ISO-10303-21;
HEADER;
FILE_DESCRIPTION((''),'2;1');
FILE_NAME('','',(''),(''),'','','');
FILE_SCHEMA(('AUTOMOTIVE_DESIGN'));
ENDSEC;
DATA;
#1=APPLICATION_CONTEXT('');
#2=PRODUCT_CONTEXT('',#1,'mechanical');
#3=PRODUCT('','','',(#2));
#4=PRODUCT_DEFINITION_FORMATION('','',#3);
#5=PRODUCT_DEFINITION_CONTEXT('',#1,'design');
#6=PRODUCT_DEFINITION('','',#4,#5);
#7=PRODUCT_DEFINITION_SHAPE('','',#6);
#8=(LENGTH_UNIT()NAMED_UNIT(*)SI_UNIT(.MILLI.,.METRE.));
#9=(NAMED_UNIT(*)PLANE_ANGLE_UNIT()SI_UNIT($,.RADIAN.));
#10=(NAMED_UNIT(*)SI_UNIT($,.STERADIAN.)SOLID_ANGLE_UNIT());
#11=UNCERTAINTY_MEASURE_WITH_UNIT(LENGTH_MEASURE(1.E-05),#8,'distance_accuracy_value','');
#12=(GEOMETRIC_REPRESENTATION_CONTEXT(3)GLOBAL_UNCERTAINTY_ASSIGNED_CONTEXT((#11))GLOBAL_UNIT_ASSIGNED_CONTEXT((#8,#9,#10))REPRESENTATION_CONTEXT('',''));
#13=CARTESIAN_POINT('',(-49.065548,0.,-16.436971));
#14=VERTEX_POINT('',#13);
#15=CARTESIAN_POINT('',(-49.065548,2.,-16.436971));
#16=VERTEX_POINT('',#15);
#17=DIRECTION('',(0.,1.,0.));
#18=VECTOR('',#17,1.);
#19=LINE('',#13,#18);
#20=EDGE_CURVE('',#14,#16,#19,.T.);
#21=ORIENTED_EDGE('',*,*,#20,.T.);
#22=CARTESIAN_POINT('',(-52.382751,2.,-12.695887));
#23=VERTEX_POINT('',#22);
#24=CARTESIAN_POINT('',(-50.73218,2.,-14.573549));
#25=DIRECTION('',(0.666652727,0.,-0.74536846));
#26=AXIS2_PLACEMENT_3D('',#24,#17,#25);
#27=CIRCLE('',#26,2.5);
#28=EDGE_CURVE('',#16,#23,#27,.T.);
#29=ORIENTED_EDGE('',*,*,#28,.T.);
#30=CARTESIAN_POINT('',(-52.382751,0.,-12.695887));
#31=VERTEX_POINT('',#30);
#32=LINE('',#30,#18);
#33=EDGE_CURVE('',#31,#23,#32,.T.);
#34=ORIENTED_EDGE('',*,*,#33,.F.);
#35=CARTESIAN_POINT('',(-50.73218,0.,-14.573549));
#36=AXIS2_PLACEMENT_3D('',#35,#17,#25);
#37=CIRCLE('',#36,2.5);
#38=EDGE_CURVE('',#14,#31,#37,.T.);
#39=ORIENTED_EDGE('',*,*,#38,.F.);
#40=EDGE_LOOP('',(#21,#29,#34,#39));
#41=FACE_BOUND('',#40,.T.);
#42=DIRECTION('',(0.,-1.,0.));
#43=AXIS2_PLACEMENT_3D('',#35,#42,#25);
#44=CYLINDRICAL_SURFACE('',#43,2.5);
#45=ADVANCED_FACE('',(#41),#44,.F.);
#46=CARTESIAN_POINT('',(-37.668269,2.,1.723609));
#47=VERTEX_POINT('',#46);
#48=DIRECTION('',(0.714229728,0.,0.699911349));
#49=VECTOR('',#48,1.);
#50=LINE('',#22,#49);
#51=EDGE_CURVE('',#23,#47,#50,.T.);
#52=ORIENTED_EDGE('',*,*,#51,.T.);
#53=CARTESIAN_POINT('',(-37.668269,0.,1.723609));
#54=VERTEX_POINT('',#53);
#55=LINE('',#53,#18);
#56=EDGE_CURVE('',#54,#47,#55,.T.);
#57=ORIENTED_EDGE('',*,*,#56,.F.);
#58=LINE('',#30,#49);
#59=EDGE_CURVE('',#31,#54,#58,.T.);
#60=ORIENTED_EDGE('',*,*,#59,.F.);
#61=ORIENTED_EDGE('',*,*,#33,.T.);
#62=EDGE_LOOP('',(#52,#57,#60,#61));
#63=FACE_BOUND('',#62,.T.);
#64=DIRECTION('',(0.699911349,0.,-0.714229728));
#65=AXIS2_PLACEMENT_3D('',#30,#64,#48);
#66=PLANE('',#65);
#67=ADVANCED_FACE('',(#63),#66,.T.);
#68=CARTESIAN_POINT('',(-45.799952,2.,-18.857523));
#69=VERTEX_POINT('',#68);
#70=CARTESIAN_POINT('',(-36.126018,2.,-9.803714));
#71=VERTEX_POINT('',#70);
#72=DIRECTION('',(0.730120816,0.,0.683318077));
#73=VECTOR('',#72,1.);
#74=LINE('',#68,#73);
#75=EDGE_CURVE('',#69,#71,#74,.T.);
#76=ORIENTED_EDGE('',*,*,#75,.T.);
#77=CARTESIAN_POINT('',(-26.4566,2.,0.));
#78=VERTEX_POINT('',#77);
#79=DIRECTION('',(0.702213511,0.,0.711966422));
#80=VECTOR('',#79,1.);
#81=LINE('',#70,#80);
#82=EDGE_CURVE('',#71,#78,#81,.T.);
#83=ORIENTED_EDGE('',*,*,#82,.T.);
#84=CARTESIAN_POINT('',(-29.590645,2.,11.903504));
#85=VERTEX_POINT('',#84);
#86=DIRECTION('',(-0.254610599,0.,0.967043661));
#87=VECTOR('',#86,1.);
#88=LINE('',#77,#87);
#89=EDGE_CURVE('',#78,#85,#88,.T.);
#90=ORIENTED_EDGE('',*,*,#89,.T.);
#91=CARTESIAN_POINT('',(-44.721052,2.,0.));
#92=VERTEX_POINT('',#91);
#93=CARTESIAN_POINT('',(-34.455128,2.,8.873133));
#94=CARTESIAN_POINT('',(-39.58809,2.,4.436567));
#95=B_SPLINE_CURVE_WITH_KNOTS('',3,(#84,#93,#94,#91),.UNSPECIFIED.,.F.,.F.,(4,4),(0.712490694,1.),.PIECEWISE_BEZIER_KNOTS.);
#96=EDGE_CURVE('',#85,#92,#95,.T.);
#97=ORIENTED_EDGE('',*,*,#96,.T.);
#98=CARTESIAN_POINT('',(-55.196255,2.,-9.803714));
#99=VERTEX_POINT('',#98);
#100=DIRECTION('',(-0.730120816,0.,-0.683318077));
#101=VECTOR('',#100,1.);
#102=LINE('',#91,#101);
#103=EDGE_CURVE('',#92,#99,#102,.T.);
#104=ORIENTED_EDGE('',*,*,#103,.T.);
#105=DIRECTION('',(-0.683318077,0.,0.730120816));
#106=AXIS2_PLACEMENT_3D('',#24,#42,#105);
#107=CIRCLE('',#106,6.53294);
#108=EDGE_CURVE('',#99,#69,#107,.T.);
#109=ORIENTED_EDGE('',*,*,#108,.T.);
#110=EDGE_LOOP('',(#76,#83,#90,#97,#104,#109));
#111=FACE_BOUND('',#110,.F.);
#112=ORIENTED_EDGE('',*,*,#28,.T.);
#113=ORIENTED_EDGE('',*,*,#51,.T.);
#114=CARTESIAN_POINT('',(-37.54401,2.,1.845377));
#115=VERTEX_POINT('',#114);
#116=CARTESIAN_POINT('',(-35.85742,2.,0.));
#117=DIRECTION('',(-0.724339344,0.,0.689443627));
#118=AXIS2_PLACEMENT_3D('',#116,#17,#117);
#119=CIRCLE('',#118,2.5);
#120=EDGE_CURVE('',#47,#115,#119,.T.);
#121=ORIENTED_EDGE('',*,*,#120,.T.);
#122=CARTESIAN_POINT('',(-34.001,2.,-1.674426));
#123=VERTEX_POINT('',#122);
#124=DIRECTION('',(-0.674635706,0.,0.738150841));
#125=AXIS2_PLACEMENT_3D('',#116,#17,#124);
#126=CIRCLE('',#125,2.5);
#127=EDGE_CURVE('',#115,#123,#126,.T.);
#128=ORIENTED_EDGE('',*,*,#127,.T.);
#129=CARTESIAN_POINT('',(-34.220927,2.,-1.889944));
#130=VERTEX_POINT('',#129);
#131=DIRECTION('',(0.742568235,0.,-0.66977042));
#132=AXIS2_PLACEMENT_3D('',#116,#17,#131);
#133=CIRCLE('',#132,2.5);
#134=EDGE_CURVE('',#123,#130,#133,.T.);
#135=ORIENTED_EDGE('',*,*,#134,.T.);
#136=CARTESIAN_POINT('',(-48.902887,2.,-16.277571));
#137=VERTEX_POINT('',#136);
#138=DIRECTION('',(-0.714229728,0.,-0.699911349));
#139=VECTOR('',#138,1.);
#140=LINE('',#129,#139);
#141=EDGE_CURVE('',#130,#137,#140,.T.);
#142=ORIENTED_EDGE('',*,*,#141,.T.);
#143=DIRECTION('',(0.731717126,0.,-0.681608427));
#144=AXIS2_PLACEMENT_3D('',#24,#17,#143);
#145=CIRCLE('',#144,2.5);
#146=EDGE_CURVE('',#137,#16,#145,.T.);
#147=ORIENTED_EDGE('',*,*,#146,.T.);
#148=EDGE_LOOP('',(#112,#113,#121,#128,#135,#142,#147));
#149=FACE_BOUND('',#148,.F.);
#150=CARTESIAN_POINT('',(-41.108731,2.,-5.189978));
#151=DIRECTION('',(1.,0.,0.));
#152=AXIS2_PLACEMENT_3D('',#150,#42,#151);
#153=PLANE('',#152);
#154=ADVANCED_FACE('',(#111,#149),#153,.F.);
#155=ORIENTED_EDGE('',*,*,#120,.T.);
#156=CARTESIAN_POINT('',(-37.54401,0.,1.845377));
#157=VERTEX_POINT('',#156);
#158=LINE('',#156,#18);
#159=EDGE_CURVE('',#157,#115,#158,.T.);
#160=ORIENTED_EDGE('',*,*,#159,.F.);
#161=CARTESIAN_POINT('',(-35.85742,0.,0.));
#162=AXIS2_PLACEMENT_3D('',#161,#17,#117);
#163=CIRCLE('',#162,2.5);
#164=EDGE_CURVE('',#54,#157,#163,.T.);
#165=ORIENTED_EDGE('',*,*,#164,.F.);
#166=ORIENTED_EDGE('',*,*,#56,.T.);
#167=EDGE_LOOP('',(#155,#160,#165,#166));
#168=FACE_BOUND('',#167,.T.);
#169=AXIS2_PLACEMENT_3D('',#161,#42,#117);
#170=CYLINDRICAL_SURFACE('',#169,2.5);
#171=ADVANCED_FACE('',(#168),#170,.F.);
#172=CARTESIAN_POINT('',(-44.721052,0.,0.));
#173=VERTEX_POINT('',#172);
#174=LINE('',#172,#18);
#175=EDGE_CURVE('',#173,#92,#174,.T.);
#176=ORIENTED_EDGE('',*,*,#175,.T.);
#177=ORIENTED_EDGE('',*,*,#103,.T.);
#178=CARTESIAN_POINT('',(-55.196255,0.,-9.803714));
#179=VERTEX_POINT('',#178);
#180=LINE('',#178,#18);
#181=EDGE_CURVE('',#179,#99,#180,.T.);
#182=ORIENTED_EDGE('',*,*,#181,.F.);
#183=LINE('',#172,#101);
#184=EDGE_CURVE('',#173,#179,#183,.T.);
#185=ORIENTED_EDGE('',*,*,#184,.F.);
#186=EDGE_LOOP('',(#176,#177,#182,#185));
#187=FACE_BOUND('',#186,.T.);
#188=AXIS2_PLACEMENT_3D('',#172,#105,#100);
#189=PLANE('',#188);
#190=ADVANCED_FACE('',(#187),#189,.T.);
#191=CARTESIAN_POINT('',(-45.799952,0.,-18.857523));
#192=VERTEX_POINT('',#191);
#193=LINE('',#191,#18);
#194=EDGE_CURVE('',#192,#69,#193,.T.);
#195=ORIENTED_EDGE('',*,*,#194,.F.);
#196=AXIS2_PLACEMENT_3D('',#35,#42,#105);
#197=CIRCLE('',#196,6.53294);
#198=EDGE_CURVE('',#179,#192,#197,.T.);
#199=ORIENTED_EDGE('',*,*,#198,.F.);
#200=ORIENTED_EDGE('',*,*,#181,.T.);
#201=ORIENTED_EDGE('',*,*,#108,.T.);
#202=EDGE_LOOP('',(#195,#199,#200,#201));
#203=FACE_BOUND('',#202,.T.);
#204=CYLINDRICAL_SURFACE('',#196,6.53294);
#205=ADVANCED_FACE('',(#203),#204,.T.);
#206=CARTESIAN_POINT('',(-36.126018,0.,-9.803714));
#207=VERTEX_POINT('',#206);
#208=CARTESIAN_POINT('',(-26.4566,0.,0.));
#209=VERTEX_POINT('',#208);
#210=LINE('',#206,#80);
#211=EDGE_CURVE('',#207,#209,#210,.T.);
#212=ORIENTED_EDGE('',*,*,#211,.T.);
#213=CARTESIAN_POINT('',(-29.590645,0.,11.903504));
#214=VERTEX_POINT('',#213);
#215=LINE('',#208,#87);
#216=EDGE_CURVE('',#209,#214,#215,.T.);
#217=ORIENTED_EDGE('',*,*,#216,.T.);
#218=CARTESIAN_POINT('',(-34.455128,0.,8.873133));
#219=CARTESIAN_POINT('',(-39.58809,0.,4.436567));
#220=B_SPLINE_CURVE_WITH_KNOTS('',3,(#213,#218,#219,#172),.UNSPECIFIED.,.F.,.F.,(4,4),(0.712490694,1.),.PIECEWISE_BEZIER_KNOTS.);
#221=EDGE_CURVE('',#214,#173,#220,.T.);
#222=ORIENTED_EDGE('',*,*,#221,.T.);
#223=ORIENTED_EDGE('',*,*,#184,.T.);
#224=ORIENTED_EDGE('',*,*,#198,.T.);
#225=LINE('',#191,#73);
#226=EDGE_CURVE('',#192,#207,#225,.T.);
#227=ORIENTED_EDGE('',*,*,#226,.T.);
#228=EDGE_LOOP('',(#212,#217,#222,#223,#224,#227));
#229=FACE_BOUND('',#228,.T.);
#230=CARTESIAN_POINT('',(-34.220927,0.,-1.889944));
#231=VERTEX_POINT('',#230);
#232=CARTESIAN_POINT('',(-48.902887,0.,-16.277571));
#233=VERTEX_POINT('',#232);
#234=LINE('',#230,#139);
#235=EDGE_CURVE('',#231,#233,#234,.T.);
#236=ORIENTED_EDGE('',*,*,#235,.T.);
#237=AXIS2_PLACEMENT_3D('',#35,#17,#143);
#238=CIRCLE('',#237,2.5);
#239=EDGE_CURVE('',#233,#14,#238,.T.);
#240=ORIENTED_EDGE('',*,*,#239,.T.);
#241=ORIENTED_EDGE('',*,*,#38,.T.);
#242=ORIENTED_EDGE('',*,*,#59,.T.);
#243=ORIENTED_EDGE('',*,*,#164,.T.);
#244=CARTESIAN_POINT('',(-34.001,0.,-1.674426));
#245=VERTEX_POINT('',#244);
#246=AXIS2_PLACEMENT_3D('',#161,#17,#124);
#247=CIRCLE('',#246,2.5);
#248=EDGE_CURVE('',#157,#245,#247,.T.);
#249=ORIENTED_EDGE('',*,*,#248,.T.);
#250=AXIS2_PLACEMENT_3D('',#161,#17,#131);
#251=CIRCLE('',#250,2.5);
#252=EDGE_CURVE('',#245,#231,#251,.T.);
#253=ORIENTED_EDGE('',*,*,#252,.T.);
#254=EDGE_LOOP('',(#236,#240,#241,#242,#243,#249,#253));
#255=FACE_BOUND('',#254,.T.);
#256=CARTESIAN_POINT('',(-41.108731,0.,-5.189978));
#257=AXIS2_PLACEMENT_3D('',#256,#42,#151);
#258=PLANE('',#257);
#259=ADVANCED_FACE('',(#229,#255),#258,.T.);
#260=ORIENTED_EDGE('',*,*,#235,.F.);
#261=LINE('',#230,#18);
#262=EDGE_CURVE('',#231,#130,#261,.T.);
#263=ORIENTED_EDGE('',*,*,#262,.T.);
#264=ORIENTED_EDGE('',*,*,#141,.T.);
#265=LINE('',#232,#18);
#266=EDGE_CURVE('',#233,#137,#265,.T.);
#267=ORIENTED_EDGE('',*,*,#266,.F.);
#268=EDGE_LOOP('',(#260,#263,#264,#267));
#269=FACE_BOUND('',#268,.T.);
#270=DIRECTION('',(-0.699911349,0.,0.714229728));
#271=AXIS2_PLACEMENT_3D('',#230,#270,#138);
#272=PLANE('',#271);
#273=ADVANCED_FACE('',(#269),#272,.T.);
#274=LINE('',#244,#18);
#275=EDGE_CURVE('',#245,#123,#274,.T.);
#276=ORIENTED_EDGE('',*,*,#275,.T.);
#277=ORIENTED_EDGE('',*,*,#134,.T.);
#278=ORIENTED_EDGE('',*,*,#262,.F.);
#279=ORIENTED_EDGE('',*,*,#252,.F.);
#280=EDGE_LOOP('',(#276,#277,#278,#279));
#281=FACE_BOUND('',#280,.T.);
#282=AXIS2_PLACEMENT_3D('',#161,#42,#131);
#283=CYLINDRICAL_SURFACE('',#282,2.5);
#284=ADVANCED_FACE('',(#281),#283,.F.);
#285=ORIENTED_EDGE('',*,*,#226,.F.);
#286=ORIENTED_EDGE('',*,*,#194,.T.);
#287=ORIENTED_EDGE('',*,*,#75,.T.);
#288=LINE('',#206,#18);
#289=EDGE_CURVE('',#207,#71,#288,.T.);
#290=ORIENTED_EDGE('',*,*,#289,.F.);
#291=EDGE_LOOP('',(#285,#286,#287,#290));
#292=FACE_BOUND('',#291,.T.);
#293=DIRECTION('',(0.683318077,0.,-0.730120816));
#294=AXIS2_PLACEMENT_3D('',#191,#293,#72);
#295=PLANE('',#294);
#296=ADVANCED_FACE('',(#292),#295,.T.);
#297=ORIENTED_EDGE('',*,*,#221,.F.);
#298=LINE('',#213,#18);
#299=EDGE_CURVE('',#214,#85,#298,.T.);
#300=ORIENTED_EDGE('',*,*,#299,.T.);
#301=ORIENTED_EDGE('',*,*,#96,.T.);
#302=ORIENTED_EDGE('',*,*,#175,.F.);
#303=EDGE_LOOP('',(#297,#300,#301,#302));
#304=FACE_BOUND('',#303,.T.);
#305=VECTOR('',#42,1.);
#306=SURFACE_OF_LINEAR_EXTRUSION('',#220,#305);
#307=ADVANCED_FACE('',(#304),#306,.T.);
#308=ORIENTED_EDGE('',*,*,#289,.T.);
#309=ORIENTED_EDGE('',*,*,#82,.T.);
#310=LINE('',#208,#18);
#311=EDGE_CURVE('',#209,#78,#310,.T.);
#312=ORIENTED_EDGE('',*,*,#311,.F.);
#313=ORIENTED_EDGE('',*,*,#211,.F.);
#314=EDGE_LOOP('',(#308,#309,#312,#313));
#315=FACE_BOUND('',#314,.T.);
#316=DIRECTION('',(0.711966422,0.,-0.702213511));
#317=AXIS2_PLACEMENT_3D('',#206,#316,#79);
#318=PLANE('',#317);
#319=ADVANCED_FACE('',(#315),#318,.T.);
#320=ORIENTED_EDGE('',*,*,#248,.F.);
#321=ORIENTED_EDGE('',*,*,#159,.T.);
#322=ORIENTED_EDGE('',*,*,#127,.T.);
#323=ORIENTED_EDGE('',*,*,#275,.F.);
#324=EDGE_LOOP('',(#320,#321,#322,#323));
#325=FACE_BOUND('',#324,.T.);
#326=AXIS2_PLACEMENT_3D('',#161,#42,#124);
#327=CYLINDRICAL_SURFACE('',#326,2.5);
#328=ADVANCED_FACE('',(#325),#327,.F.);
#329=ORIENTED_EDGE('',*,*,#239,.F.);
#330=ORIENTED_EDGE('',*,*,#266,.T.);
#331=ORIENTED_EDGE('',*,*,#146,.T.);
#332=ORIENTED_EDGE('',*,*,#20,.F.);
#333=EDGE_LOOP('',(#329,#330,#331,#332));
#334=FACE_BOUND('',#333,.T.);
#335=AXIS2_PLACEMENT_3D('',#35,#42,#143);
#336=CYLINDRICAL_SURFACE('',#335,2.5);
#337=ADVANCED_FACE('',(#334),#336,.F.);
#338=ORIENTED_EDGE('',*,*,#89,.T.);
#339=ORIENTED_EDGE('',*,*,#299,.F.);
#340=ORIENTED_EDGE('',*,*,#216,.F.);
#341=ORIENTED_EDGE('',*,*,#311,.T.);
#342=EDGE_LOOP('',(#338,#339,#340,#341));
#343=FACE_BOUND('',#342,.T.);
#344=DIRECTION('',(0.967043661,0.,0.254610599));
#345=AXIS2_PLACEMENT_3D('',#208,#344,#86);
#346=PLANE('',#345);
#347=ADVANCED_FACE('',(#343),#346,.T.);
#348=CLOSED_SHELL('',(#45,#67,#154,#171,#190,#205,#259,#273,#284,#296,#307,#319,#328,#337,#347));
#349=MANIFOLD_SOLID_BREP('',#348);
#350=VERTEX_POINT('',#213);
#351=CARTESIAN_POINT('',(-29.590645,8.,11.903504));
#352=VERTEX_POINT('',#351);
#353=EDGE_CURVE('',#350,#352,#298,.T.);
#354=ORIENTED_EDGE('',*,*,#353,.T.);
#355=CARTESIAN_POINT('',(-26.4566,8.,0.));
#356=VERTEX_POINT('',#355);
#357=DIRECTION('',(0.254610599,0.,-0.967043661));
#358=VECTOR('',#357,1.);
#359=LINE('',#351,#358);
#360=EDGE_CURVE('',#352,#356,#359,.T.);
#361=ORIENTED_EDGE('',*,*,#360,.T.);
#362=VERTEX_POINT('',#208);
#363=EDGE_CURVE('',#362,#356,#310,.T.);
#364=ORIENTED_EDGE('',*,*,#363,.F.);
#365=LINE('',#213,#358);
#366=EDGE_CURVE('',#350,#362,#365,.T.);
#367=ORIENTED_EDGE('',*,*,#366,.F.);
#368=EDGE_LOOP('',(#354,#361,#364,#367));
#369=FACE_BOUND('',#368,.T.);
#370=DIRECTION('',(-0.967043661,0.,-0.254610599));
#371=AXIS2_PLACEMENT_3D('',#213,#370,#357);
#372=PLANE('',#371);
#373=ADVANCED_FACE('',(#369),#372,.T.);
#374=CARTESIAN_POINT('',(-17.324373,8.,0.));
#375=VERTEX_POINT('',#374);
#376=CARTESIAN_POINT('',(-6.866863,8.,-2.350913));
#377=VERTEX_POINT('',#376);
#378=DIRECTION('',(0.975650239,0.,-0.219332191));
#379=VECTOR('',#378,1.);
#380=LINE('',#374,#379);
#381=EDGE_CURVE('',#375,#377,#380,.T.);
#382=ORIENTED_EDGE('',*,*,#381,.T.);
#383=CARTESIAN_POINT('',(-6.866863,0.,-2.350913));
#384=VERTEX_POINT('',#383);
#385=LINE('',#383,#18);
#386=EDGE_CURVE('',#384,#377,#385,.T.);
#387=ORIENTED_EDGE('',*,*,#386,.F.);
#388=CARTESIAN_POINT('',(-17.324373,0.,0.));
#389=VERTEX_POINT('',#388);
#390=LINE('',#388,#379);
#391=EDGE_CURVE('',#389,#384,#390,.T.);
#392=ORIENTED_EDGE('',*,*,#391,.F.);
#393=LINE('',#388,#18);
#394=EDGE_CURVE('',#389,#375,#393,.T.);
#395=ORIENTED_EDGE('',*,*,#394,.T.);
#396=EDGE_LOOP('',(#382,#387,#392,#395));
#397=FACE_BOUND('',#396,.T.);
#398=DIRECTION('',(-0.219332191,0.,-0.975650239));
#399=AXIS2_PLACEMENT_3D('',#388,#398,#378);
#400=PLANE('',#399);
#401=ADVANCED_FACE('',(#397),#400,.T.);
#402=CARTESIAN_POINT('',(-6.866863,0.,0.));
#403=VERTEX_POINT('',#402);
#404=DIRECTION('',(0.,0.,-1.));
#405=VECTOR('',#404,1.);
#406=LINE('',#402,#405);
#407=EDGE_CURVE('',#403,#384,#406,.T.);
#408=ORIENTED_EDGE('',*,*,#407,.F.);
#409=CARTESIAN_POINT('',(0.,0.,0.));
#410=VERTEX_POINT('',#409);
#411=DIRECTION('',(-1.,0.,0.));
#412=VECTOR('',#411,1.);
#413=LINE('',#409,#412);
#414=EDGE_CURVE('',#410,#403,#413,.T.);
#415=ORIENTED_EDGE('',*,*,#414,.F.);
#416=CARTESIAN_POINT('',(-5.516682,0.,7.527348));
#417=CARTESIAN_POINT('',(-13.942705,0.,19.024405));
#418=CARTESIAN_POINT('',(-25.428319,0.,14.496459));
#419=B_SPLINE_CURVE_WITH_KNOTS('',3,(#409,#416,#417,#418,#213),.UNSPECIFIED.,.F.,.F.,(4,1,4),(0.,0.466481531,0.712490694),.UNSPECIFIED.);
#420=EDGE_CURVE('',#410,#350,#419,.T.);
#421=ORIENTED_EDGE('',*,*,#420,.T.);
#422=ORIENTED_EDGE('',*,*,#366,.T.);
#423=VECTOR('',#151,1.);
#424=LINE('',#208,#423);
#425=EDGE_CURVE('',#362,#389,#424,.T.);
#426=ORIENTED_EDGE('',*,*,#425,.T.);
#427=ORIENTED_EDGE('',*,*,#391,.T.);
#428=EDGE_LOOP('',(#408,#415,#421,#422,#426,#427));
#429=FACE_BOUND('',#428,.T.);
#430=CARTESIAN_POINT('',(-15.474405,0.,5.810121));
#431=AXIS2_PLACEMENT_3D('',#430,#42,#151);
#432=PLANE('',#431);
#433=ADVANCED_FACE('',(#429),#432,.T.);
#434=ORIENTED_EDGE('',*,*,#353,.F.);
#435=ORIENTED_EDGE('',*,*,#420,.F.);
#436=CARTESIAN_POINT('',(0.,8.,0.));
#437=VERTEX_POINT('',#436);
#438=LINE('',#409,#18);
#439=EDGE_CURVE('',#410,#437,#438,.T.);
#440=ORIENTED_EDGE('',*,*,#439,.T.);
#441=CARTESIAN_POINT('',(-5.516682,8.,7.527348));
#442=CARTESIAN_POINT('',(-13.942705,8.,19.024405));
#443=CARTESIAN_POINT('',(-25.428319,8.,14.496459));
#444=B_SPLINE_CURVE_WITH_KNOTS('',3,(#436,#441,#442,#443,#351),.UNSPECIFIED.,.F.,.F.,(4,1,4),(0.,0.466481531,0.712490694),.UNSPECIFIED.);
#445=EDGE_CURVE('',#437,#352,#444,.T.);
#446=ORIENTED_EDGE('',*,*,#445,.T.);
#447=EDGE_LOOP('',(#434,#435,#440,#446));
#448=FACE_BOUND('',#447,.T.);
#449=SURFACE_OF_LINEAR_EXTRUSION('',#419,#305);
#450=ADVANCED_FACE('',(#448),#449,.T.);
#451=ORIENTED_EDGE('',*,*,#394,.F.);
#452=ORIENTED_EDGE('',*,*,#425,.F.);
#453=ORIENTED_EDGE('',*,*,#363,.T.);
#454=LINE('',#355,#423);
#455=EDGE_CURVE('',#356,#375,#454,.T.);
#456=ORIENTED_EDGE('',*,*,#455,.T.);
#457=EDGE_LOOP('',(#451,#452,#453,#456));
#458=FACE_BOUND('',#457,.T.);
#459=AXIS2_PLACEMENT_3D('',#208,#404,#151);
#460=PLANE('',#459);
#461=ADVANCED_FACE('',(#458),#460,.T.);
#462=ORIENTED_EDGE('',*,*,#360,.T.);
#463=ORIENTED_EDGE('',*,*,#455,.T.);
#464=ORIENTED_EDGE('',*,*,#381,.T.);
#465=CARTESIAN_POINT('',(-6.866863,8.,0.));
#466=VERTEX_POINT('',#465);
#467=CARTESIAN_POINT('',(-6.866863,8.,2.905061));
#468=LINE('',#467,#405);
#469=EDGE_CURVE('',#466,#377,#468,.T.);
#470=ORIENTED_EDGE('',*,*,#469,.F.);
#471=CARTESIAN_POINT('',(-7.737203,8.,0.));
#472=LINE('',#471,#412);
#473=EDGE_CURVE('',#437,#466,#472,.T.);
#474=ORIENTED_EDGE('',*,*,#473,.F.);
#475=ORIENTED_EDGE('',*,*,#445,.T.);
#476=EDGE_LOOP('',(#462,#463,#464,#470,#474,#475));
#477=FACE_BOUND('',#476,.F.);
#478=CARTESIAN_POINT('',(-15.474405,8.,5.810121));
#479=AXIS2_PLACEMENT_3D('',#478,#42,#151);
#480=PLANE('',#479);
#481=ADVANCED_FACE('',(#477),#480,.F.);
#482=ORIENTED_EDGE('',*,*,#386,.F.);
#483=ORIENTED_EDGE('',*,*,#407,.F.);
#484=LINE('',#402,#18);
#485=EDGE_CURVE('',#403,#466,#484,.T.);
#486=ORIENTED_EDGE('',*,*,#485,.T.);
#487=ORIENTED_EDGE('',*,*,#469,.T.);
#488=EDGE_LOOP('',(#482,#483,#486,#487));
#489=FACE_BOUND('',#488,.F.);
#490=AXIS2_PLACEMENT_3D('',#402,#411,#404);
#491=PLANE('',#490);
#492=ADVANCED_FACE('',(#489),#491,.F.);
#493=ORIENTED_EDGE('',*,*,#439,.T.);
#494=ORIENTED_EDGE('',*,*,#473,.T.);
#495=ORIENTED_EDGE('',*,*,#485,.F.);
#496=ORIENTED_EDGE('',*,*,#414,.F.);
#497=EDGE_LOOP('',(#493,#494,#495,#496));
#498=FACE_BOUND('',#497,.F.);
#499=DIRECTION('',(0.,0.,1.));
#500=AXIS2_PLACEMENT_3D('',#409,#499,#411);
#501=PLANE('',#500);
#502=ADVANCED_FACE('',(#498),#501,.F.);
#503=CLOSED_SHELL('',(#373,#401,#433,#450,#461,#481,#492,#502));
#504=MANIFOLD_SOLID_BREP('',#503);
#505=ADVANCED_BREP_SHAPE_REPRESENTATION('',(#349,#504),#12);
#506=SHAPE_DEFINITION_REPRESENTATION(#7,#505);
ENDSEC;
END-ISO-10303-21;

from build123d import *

# Parameters (mm, degrees)
F1_DEPTH = 8
F2_DEPTH = 2
F3_DEPTH = 25


with BuildPart() as f1:
    # F0 (on Front) → F1 (new body)
    with BuildSketch(Plane.XZ):
        with BuildLine():
            Line((-6.8668625318, 0), (0, 0))
            add(Edge.make_bspline(
                [(0, 0), (-5.5166817517, 7.5273476461), (-13.9427053961, 19.0244054975), (-25.4283193392, 14.4964589712), (-29.5906448635, 11.9035035184)],
                knots=[0, 0, 0, 0, 0.4664815309, 0.7124906939, 0.7124906939, 0.7124906939, 0.7124906939], degree=3))
            Line((-29.5906448635, 11.9035035184), (-26.4566000551, 0))
            Line((-26.4566000551, 0), (-17.324373126, 0))
            Line((-17.324373126, 0), (-6.8668625318, -2.3509128803))
            Line((-6.8668625318, -2.3509128803), (-6.8668625318, 0))
        make_face()
        Polygon((0, -3.8946259301), (0, 0), (-6.8668625318, 0), (-6.8668625318, -2.3509128803), align=None)
    extrude(amount=-F1_DEPTH)

    # F0 (on Front) → F3 (cut)
    with BuildSketch(Plane.XZ):
        Polygon((0, -3.8946259301), (0, 0), (-6.8668625318, 0), (-6.8668625318, -2.3509128803), align=None)
    extrude(amount=-F3_DEPTH, mode=Mode.SUBTRACT)


with BuildPart() as f2:
    # F0 (on Front) → F2 (new body)
    with BuildSketch(Plane.XZ):
        with BuildLine():
            Line((-26.4566000551, 0), (-29.5906448635, 11.9035035184))
            add(Edge.make_bspline(
                [(-29.5906448635, 11.9035035184), (-34.4551275869, 8.8731333733), (-39.5880898188, 4.4365666867), (-44.7210520506, 0)],
                knots=[0.7124906939, 0.7124906939, 0.7124906939, 0.7124906939, 1, 1, 1, 1], degree=3))
            Line((-44.7210520506, 0), (-55.1962554455, -9.8037142307))
            ThreePointArc((-55.1962554455, -9.8037142307), (-55.2651318504, -19.2779776557), (-45.7999520147, -18.85752304))
            Line((-45.7999520147, -18.85752304), (-36.1260175705, -9.8037142307))
            Line((-36.1260175705, -9.8037142307), (-26.4566000551, 0))
        make_face()
        with BuildLine():
            ThreePointArc((-34.0009998268, -1.6744260512), (-34.1076420427, -1.7855743191), (-34.2209268371, -1.8899441183))
            Line((-34.2209268371, -1.8899441183), (-48.9028869032, -16.2775705017))
            ThreePointArc((-48.9028869032, -16.2775705017), (-48.9824013436, -16.359123751), (-49.065547898, -16.4369705825))
            ThreePointArc((-49.065547898, -16.4369705825), (-52.6027386022, -16.2321661604), (-52.3827507862, -12.6958872842))
            Line((-52.3827507862, -12.6958872842), (-37.6682687749, 1.7236090672))
            ThreePointArc((-37.6682687749, 1.7236090672), (-37.6071987867, 1.7855743191), (-37.5440096809, 1.8453771016))
            ThreePointArc((-37.5440096809, 1.8453771016), (-34.095471429, 1.7735658352), (-34.0009998268, -1.6744260512))
        make_face(mode=Mode.SUBTRACT)
    extrude(amount=-F2_DEPTH)


solid = Compound([f1.part, f2.part])
